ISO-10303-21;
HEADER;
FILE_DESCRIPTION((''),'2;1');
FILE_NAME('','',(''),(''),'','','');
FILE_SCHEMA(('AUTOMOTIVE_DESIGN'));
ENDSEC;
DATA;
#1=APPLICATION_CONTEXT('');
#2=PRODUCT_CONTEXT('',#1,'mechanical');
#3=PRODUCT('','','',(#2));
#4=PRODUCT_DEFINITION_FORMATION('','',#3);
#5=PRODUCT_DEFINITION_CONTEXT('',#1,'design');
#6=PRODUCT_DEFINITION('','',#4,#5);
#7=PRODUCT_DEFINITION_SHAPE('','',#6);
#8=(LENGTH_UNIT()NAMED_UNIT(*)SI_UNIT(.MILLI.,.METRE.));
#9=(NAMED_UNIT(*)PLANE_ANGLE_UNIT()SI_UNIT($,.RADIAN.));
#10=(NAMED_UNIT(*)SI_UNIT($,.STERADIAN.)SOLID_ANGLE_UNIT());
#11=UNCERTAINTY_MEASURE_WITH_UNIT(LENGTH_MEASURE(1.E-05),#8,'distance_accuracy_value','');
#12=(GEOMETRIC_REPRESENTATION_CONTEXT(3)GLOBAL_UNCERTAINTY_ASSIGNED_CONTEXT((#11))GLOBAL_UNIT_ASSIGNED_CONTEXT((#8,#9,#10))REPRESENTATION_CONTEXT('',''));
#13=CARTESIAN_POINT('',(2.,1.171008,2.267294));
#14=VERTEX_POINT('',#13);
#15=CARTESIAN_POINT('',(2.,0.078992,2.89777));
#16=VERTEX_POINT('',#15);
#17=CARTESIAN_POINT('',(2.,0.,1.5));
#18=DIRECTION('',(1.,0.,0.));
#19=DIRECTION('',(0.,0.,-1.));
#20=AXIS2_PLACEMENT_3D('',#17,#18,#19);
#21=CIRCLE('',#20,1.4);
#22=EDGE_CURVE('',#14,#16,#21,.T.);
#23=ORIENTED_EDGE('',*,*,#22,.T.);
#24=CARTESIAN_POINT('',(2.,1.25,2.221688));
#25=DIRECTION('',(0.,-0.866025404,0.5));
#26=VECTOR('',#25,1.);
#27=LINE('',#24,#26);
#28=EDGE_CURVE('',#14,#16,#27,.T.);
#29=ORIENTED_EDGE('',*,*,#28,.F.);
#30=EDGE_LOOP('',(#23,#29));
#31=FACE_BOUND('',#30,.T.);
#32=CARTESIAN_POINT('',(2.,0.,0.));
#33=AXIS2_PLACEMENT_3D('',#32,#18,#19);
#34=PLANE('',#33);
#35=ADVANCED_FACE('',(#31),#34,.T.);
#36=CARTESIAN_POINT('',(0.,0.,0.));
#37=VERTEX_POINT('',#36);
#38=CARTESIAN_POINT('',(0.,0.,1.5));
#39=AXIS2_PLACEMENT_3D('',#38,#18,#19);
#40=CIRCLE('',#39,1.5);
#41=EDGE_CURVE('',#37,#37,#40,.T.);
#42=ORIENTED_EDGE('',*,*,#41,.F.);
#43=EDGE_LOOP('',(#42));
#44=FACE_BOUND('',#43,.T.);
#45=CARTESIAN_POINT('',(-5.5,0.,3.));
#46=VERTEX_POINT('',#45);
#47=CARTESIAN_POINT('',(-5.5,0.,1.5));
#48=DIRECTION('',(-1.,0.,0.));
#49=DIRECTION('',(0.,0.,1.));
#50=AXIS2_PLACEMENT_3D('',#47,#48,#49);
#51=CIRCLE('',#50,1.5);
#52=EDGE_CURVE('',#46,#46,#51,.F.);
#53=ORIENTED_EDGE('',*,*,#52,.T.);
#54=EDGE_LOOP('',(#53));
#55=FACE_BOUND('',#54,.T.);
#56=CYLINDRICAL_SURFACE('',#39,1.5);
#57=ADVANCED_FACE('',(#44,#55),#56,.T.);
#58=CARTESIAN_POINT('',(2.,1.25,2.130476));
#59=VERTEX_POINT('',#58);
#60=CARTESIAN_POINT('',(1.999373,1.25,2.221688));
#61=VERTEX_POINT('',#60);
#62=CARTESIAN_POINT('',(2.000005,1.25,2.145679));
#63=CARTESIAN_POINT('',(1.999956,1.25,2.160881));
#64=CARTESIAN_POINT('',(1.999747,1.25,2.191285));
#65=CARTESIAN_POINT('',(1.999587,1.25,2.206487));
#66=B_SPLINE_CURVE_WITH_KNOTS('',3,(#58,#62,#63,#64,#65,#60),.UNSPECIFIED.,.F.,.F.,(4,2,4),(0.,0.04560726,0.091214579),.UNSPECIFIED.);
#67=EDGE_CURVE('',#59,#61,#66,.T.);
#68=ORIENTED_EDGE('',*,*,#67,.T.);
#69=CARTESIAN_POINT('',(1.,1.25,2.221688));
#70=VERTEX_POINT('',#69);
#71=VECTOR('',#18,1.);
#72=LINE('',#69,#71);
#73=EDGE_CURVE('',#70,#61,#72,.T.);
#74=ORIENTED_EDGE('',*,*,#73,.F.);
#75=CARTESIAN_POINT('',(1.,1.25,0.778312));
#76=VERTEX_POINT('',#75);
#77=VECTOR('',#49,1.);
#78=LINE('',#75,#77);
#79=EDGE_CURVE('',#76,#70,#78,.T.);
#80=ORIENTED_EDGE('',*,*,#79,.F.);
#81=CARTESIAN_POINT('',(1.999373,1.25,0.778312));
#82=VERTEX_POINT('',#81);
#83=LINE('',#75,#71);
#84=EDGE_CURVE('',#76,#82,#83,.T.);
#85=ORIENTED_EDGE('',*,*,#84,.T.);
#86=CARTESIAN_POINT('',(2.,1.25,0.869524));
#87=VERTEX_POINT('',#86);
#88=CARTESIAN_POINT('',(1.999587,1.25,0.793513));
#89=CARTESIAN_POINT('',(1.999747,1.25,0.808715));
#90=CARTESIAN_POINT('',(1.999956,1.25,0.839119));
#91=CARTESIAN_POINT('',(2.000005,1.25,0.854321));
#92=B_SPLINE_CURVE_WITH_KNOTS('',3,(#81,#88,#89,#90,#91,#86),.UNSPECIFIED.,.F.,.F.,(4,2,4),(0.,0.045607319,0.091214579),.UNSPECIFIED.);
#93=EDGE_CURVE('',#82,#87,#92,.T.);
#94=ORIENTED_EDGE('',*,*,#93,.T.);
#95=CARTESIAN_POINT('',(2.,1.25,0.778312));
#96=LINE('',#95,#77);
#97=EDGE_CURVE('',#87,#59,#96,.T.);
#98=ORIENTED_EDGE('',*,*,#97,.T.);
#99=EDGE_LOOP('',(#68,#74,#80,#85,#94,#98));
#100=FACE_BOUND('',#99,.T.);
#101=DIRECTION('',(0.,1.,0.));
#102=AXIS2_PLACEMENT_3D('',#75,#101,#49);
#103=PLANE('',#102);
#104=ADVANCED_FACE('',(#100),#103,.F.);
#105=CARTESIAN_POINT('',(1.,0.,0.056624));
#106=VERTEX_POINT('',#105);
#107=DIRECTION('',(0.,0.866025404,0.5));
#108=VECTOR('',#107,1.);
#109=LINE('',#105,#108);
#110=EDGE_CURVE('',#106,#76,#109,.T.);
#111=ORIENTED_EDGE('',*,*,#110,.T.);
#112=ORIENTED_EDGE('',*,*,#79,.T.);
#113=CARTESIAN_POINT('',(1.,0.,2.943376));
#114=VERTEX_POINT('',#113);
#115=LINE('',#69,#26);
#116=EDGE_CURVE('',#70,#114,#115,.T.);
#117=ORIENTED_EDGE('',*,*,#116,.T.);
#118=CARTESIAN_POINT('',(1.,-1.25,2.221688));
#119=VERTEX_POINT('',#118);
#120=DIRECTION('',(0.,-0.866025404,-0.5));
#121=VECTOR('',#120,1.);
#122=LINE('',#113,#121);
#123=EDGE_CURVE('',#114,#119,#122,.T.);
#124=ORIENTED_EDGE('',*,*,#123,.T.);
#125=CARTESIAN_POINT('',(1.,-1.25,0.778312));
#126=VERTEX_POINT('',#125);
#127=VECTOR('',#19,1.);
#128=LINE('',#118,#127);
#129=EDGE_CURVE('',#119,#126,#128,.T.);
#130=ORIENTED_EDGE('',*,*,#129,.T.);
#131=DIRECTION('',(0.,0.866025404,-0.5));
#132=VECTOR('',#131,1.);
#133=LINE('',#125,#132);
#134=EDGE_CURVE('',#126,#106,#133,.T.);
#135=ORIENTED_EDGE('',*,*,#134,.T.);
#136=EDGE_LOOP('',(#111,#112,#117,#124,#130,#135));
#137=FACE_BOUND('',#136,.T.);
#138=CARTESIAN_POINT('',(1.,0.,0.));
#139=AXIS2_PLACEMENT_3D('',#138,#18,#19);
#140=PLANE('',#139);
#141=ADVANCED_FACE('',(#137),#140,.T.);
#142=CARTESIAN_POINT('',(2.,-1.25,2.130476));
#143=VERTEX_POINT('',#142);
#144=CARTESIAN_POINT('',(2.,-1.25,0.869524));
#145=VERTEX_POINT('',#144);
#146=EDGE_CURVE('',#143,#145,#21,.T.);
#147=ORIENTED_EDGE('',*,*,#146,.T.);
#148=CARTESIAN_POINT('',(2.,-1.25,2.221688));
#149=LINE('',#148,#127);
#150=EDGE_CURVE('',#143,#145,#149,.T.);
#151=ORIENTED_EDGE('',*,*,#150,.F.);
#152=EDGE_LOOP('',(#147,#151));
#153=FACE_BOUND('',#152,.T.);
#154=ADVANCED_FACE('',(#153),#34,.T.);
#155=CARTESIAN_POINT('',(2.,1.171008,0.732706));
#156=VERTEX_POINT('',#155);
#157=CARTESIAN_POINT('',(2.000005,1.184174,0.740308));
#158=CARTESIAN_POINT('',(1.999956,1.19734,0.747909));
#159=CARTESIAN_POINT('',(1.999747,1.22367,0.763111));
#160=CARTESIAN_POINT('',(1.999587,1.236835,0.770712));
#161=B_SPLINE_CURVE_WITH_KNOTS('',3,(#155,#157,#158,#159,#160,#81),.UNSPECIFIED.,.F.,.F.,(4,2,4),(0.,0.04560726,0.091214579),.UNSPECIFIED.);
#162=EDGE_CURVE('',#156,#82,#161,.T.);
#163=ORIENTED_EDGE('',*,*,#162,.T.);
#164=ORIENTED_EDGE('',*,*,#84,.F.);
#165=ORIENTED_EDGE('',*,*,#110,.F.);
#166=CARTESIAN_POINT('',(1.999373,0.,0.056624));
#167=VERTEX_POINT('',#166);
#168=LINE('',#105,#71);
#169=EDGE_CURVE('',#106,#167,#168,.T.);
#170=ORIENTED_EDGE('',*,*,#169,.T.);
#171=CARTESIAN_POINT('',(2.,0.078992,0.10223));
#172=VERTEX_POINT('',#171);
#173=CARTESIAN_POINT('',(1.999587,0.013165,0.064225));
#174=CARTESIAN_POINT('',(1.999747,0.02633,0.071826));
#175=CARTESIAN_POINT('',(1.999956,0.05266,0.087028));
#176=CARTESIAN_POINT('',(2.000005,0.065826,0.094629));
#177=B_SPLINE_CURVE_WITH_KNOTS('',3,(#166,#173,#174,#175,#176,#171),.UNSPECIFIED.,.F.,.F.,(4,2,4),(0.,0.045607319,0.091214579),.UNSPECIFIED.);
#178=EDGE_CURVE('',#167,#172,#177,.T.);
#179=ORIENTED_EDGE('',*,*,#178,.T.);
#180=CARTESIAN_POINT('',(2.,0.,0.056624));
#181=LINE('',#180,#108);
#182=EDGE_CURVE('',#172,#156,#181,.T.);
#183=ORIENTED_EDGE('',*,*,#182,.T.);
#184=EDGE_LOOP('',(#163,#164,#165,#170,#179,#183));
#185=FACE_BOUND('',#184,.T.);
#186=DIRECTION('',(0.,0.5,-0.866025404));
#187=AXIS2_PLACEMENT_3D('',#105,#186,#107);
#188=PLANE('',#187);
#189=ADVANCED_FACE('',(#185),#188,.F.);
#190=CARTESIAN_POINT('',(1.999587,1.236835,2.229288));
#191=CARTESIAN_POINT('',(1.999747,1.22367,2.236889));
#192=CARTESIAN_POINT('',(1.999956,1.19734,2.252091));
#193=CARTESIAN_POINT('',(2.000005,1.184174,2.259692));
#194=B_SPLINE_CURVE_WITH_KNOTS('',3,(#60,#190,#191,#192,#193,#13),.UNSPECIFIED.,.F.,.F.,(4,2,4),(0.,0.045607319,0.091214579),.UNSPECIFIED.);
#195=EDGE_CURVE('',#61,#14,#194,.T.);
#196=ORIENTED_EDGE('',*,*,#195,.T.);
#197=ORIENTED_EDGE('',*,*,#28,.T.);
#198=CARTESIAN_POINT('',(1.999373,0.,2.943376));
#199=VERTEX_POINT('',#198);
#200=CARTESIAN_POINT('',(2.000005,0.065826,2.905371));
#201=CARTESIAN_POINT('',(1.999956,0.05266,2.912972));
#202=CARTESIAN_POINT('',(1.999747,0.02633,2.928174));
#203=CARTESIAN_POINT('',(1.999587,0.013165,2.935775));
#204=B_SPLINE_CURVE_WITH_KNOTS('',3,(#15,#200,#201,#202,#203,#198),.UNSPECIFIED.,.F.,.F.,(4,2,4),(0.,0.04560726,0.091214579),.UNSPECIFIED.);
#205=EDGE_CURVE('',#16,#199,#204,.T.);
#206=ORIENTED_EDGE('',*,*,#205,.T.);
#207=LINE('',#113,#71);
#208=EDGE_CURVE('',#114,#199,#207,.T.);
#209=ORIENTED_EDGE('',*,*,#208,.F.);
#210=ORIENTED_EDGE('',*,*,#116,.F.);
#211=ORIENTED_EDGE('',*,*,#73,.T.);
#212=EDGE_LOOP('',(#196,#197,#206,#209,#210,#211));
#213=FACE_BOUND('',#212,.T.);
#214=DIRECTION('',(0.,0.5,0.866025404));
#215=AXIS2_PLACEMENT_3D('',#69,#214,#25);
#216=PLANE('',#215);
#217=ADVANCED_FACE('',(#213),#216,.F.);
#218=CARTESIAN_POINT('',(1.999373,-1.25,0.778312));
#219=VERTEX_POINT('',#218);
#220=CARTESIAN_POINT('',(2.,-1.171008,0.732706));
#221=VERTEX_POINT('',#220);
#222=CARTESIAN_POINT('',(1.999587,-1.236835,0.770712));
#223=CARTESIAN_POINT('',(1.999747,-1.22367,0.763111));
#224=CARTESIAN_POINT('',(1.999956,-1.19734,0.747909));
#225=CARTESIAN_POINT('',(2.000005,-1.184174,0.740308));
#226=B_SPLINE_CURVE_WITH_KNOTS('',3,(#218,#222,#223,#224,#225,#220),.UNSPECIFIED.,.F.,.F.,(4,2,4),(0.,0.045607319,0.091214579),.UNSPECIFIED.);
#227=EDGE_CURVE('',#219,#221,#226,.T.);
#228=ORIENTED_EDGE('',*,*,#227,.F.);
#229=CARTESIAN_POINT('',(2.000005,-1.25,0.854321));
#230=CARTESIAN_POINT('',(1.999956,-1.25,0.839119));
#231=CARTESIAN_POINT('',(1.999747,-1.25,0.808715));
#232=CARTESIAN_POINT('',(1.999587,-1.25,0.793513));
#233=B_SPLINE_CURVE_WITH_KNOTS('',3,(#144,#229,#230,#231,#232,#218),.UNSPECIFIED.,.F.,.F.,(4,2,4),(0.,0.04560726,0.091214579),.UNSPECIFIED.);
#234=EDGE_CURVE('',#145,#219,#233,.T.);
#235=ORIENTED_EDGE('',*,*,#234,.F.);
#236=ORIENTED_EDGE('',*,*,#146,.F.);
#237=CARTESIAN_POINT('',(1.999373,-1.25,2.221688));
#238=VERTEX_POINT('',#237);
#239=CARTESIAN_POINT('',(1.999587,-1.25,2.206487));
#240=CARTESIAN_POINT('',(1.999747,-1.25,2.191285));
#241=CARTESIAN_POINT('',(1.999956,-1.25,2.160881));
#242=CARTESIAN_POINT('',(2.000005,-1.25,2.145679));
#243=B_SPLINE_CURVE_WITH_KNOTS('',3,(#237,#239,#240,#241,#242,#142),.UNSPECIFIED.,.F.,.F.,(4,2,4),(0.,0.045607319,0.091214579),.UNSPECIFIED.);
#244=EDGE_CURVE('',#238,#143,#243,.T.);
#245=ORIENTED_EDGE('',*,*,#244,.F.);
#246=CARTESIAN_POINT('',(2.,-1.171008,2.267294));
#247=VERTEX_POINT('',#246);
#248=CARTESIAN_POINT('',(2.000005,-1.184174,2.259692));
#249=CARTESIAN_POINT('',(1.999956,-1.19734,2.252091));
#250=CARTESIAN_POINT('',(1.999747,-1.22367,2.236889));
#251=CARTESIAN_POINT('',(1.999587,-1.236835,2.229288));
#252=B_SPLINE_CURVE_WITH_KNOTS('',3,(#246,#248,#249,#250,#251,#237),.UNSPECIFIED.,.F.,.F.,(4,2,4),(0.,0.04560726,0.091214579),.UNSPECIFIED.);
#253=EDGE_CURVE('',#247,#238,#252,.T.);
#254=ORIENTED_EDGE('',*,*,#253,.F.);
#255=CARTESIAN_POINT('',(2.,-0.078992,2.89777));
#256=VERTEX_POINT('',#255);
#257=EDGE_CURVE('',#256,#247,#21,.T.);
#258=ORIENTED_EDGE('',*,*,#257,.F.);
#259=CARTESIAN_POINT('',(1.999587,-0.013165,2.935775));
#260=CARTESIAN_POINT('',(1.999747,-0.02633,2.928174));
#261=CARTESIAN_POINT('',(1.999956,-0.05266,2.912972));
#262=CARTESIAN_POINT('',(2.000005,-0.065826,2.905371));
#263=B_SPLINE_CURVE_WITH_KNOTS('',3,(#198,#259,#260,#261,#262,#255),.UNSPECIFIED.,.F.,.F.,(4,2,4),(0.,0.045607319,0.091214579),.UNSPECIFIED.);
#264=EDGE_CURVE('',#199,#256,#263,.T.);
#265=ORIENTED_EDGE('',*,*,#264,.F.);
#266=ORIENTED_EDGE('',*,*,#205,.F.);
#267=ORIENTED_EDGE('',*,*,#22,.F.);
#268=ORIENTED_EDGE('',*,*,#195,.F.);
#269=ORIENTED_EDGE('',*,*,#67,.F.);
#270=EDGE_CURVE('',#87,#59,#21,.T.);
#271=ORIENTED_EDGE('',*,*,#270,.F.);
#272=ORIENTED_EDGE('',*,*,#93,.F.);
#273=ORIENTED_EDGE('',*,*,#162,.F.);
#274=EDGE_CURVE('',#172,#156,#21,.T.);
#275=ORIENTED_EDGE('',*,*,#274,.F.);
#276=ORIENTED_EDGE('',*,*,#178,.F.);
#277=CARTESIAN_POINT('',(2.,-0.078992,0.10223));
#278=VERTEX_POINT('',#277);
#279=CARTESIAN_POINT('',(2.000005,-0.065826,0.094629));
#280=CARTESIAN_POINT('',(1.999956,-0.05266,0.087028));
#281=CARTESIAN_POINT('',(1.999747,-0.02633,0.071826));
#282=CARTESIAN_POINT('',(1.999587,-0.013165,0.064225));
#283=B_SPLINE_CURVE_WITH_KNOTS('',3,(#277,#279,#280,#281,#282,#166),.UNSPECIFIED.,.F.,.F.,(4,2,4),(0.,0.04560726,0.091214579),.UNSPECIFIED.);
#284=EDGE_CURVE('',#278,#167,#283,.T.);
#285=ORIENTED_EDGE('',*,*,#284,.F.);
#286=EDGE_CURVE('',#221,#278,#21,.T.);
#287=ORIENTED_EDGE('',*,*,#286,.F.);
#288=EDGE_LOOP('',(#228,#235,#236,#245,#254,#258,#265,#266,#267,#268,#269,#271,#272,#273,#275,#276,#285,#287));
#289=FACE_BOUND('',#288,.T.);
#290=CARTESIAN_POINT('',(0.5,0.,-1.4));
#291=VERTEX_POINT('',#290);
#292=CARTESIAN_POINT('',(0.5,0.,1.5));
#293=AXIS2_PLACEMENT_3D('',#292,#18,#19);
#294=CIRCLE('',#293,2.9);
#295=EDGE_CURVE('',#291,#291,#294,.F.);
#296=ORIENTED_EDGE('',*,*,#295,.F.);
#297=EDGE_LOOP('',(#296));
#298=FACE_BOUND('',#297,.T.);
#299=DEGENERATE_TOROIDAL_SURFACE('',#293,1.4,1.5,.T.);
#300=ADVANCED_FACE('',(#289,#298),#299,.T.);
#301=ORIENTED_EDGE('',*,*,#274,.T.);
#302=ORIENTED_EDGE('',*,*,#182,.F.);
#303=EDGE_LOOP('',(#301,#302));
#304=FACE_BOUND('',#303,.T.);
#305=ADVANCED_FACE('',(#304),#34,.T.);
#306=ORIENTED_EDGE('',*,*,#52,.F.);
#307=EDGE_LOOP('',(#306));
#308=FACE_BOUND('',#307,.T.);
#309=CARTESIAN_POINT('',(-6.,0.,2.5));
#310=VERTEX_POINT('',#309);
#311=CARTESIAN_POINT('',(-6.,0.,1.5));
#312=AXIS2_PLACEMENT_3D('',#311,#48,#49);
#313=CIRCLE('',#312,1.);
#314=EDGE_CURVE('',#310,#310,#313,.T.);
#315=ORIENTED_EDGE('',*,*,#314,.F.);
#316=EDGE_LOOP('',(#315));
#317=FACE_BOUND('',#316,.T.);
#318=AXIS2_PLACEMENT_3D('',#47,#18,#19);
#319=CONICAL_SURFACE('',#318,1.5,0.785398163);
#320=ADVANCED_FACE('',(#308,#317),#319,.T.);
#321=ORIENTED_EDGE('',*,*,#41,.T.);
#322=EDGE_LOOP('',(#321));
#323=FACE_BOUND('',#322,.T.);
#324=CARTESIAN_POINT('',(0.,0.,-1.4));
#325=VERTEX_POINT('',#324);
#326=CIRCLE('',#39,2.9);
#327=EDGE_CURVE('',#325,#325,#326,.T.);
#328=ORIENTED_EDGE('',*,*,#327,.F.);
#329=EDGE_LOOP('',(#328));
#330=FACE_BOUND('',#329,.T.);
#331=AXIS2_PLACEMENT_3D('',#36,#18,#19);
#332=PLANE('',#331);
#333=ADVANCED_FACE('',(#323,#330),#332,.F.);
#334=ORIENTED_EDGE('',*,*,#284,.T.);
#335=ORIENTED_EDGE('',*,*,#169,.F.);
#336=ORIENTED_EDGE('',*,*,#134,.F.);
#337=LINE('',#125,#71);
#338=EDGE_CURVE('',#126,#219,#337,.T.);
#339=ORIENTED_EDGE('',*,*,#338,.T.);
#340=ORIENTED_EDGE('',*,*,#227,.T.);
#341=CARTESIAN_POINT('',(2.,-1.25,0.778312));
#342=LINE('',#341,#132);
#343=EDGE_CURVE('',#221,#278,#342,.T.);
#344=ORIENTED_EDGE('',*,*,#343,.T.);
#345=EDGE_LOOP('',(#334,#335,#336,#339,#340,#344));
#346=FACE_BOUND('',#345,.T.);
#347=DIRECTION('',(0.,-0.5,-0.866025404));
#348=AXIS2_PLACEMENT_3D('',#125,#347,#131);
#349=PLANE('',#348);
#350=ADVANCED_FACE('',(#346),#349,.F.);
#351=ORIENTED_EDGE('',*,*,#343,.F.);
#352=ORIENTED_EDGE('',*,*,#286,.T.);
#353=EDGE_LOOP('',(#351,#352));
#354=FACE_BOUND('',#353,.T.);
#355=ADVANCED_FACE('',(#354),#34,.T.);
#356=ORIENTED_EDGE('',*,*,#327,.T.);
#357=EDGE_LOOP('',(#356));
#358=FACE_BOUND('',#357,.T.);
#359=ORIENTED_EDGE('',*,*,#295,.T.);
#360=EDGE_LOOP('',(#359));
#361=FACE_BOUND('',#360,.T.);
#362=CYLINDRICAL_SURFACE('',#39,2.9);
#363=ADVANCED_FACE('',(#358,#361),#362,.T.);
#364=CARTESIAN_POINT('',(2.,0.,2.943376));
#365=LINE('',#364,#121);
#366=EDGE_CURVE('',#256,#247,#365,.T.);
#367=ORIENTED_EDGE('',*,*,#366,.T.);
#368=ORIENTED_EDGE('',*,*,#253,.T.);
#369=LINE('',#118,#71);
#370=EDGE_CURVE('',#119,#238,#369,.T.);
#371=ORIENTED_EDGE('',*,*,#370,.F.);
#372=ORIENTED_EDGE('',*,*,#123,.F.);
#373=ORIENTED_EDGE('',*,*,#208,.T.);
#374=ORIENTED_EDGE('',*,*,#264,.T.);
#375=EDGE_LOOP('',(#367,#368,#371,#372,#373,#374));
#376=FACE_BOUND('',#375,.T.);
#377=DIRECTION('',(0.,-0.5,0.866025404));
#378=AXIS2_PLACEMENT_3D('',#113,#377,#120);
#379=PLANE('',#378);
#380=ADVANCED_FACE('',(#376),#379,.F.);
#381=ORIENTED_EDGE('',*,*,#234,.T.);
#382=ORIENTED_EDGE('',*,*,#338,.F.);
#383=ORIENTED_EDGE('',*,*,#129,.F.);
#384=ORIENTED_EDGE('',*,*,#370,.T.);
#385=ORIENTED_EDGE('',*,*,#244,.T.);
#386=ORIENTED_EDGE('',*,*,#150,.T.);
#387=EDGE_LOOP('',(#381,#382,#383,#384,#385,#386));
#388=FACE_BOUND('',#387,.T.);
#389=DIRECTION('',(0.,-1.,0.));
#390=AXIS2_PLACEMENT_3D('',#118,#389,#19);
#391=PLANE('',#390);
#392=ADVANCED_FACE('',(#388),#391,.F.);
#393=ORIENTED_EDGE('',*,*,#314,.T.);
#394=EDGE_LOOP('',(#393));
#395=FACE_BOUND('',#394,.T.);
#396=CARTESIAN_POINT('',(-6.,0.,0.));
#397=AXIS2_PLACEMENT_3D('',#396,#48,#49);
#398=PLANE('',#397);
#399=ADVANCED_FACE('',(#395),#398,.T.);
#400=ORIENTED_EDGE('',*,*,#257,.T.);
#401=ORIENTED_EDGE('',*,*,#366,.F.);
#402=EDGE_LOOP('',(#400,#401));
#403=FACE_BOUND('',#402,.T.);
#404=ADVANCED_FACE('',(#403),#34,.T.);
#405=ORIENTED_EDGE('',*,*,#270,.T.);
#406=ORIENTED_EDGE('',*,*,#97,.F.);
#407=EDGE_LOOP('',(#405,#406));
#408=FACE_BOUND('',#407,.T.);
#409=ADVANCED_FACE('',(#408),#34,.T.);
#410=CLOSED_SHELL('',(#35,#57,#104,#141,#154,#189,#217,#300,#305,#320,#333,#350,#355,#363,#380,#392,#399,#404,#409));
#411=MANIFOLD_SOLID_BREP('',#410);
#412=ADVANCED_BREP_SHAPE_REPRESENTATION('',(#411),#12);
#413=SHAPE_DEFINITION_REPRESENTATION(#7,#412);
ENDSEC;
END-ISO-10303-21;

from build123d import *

# Parameters (mm, degrees)
CUT_EXTRUDE1_DEPTH = 1
FILLET1_R          = 1.5
CHAMFER1_SIZE      = 0.5


with BuildPart() as part:
    # Sketch1 → Revolve1 (revolve)
    with BuildSketch(Plane(origin=(0, 0, 0), x_dir=(1, 0, 0), z_dir=(0, 1, 0))):
        Polygon((0, 0), (-6, -7.3e-16), (-6, -1.5000000000000007), (1e-17, -1.5), align=None)
        Polygon((1e-17, 1.3999999999999995), (1e-17, 0), (1e-17, -1.5), (2, -1.5), (2, 1.3999999999999995), align=None)
    revolve(axis=Axis((1e-17, 0, 1.5), (-1, 0, 1.1e-16)))

    # Sketch3 → Cut-Extrude1 (cut)
    with BuildSketch(Plane(origin=(2, 0, -2.2e-16), x_dir=(-1.3e-16, 0, -1), z_dir=(1, 0, -1.3e-16))):
        Polygon((-2.2216878364870323, -1.2500000000000002), (-0.7783121635129678, -1.2500000000000002), (-0.05662432702593554, 0), (-0.7783121635129678, 1.2500000000000002), (-2.2216878364870323, 1.2500000000000004), (-2.9433756729740645, 0), align=None)
    extrude(amount=-CUT_EXTRUDE1_DEPTH, mode=Mode.SUBTRACT)

    # Fillet1
    fillet1_edges = [part.edges().sort_by_distance(p)[0] for p in [
        (2.000000000000001, -3.6e-16, 4.3999999999999995),
    ]]
    fillet(fillet1_edges, radius=FILLET1_R - 0.0001)  # a hair under: the kernel refuses the full size

    # Chamfer1
    chamfer1_edges = [part.edges().sort_by_distance(p)[0] for p in [
        (-6, -1.8e-16, 3.000000000000001),
    ]]
    chamfer(chamfer1_edges, length=CHAMFER1_SIZE)


solid = part.part
